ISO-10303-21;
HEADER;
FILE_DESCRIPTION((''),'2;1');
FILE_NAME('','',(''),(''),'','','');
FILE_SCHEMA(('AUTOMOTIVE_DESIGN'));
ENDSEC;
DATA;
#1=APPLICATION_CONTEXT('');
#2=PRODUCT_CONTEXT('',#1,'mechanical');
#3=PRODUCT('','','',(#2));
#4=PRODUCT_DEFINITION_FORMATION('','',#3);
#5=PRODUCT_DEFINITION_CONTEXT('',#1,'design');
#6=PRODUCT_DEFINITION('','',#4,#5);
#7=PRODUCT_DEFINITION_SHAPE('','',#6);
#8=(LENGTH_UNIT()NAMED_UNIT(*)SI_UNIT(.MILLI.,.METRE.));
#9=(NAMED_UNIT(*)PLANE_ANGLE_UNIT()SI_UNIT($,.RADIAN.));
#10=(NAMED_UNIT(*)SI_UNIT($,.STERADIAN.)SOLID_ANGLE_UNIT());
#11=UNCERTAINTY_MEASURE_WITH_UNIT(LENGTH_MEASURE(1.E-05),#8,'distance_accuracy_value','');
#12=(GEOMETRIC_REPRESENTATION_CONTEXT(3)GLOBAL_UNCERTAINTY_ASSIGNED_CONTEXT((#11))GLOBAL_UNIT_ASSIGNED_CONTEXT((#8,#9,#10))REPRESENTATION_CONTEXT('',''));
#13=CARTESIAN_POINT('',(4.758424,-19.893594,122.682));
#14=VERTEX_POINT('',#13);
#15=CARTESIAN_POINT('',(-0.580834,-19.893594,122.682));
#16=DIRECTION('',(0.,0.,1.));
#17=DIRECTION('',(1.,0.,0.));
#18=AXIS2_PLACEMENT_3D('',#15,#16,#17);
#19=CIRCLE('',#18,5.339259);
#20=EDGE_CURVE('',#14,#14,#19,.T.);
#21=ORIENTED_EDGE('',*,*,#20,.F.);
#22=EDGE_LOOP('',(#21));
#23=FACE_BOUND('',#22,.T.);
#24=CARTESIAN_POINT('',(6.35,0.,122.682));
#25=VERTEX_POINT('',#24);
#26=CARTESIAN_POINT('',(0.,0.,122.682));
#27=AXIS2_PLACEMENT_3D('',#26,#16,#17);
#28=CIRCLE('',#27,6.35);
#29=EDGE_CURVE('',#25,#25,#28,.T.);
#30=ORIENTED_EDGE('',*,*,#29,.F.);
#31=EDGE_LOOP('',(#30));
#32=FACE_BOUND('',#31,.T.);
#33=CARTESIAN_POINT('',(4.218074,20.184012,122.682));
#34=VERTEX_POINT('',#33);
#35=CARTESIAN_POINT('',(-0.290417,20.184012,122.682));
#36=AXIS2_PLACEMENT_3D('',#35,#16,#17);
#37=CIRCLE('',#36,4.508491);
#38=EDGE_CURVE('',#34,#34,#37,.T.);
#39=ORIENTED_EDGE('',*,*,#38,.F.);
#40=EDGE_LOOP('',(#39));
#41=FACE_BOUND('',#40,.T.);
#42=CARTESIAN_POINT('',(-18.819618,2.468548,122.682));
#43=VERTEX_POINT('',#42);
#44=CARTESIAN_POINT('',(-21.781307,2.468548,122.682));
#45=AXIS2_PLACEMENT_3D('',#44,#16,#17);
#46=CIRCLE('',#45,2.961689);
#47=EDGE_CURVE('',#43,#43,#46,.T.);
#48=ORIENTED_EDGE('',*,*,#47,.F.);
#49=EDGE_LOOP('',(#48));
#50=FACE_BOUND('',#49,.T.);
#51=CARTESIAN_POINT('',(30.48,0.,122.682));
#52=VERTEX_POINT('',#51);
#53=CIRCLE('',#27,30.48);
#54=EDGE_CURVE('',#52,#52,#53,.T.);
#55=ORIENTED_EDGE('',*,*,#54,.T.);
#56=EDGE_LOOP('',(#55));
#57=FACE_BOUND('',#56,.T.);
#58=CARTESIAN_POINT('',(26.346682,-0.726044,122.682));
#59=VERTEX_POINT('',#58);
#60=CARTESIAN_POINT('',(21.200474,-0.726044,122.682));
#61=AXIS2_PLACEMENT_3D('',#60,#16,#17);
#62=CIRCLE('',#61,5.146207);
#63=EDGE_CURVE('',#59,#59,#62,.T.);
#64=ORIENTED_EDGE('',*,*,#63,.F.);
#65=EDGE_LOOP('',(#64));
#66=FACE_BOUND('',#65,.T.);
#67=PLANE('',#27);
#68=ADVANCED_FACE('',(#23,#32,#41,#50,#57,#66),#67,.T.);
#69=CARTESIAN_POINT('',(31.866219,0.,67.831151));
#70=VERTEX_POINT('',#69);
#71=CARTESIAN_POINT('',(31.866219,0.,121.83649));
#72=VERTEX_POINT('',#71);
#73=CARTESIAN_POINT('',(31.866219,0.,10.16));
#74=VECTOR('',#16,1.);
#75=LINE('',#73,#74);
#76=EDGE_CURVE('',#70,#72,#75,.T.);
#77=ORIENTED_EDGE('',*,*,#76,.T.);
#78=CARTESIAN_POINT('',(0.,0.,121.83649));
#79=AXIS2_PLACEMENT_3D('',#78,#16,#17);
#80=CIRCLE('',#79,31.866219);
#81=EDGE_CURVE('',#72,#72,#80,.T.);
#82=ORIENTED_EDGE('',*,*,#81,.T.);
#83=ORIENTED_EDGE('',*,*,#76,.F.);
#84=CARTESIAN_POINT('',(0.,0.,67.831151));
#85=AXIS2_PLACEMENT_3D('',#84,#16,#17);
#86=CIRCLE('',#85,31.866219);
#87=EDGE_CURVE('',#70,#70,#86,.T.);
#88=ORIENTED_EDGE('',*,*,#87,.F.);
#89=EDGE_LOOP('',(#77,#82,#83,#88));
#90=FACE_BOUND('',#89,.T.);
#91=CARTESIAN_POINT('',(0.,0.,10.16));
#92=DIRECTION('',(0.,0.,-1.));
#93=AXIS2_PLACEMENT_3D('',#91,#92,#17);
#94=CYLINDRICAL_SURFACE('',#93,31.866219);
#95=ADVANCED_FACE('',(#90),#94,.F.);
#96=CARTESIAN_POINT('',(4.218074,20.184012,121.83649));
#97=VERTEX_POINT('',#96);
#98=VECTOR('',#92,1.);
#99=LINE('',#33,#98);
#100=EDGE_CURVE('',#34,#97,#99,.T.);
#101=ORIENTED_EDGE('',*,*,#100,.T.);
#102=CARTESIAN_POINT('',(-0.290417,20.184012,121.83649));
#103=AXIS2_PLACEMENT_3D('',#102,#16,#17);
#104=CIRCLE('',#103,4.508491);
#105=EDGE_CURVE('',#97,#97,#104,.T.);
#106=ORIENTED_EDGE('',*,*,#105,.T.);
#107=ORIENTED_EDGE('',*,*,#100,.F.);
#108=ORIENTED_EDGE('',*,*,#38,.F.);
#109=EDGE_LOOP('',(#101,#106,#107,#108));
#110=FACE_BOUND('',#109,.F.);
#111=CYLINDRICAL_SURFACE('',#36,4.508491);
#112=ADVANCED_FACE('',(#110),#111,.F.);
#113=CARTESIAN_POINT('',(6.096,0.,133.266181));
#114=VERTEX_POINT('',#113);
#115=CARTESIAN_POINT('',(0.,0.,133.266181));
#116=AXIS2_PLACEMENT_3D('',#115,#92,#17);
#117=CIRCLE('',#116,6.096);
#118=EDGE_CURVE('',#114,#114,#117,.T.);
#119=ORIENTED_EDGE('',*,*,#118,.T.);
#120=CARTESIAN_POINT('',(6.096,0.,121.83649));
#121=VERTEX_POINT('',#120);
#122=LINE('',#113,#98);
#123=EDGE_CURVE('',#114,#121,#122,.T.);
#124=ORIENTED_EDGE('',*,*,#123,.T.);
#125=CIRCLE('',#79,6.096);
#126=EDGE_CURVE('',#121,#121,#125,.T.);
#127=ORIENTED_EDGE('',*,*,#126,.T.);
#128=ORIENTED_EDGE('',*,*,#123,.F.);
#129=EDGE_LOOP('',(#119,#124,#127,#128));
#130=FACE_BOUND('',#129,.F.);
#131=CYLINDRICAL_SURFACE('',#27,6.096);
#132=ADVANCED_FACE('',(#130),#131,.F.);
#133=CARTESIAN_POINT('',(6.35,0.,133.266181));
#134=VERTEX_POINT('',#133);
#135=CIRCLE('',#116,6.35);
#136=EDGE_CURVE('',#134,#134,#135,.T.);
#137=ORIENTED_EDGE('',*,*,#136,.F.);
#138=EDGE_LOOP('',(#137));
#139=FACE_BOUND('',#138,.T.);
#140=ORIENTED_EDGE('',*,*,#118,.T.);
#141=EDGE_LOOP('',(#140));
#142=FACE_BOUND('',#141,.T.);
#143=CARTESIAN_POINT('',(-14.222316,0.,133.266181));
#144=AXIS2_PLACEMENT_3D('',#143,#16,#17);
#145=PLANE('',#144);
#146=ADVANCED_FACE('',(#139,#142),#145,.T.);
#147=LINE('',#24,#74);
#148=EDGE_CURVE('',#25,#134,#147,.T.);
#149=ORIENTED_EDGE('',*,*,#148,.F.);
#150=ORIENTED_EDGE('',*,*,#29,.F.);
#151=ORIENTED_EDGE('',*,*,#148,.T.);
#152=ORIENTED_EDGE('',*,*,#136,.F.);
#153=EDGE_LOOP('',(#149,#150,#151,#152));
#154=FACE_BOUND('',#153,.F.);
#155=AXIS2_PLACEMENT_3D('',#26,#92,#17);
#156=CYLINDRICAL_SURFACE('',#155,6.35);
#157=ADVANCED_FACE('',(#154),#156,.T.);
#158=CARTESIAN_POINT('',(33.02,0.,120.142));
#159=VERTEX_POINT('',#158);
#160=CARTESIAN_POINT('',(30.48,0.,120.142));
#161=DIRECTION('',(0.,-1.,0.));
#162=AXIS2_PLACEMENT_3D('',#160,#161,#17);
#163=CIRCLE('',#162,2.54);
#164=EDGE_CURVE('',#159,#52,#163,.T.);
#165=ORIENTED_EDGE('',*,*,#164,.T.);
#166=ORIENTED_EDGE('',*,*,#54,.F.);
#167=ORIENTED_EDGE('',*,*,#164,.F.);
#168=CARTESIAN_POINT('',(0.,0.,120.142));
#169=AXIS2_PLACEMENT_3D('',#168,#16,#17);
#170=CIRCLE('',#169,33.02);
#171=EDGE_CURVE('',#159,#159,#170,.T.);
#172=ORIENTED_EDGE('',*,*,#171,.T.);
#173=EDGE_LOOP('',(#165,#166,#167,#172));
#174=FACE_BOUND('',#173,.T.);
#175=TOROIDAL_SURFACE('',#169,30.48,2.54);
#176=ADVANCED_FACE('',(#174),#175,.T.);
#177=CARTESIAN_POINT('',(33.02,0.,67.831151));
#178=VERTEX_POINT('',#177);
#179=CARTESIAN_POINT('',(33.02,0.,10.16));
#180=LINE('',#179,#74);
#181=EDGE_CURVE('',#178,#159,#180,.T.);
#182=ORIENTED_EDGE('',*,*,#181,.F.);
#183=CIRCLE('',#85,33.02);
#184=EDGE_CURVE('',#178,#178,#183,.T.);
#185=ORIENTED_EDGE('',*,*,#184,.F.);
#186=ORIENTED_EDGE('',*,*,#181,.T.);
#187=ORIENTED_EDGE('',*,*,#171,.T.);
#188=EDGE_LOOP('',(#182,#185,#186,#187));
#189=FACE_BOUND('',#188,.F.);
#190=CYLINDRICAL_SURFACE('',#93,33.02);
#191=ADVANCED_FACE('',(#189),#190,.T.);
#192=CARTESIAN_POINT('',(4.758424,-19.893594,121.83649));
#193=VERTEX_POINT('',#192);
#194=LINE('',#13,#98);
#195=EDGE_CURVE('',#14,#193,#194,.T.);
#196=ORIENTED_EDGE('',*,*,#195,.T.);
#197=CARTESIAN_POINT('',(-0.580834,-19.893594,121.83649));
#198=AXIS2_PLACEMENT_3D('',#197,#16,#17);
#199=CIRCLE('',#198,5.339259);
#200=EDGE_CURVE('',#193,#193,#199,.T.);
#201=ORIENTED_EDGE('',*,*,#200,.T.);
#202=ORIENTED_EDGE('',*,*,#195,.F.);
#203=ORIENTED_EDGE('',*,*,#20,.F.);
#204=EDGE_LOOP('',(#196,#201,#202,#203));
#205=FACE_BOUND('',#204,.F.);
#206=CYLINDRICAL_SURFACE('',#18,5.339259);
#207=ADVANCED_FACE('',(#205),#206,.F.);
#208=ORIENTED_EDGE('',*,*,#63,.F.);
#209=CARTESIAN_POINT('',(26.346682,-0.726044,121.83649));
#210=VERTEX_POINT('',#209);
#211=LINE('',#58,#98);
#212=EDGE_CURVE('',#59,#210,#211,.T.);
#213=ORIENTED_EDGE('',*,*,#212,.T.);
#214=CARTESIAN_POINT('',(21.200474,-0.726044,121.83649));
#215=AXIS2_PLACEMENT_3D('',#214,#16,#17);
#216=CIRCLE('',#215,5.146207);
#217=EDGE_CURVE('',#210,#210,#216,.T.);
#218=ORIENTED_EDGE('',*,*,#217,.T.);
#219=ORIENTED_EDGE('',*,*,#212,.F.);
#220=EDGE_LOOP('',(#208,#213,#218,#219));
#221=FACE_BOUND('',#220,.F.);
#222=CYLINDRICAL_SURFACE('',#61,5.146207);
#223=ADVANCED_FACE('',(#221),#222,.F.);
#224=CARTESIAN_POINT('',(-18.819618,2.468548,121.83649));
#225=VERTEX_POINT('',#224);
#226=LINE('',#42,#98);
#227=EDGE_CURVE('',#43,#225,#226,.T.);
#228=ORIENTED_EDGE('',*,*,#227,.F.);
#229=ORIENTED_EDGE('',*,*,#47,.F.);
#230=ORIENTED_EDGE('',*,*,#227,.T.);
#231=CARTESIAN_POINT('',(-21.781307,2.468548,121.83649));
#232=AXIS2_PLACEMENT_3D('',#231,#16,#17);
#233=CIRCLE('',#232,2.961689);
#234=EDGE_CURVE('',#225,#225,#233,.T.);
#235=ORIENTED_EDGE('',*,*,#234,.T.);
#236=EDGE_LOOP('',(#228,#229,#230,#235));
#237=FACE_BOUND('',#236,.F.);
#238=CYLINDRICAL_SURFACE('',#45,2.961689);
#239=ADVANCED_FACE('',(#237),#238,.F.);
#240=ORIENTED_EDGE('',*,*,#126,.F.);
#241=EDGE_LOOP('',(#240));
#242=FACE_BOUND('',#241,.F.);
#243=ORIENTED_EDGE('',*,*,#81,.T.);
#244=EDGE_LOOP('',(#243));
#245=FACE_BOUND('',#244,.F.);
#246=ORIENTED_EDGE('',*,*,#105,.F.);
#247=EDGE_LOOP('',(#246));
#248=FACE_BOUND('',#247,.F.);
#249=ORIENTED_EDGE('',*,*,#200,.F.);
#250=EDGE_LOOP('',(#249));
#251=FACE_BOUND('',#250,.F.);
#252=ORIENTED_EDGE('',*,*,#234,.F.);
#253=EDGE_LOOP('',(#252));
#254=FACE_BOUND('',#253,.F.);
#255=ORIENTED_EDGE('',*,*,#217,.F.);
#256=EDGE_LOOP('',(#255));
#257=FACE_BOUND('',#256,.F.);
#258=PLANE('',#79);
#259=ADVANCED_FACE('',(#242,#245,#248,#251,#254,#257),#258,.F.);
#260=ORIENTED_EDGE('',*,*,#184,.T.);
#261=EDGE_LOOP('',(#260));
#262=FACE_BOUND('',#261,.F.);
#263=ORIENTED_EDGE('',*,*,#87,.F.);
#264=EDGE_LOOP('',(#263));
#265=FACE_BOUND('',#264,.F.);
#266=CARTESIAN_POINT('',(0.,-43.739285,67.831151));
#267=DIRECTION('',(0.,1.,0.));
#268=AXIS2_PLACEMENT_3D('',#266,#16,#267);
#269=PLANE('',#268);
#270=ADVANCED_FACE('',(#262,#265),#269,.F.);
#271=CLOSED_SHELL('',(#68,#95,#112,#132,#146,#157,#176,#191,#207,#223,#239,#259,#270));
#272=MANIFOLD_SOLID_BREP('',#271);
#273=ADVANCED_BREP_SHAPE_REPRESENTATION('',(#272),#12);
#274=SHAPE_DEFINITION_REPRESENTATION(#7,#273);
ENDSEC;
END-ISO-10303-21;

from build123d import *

# Parameters (mm, degrees)
F0_R           = 27.051
F2_R           = 33.02
F4_DEPTH       = 112.522
F8_DEPTH       = 25.4
F6_R           = 31.8662185307
F10_R          = 27.1012036097
F12_DEPTH      = 111.67649
F13_R          = 6.35
F13_R_2        = 6.096
F14_DEPTH      = 25.4
F15_DEPTH      = 25.4
F16_W          = 95.3798592091
F16_H          = 79.9988703802
F17_DEPTH      = 50.8
F17_DEPTH_BACK = 50.8
F18_R          = 4.5084907347
F18_R_2        = 5.1462074836
F18_R_3        = 5.3392585876
F18_R_4        = 2.9616888365
F19_DEPTH      = 25.4
F20_R          = 2.54
F21_W          = 29.3621988967
F21_H          = 16.516238451
F22_DEPTH      = 25.4
F22_DEPTH_BACK = 25.4


with BuildPart() as f3:
    # F0 (on Top) → F3 section 0
    with BuildSketch(Plane.XY):
        Circle(F0_R)
    # F2 (on offset) → F3 section 1
    with BuildSketch(Plane.XY.offset(10.16)):
        Circle(F2_R)
    loft()

    # F4 (add): a face of the model
    f4_faces = [f3.faces().sort_by_distance(p)[0] for p in [
        (0, 0, 10.16),
    ]]
    extrude(f4_faces, amount=F4_DEPTH)

    # F7 (on face) → F8 (cut)
    with BuildSketch(Plane(origin=(0, 0, 0), x_dir=(1, 0, 0), z_dir=(0, 0, -1))):
        with BuildLine():
            Line((-9.0020672118, 14.5257171748), (8.9738084456, 14.5257171748))
            ThreePointArc((8.9738084456, 14.5257171748), (-0.0141293831, 22.7222466067), (-9.0020672118, 14.5257171748))
        make_face()
    extrude(amount=-F8_DEPTH, mode=Mode.SUBTRACT)

    # F6 (on offset) → F11 section 0
    with BuildSketch(Plane.XY.offset(10.16)):
        Circle(F6_R)
    # F10 (on offset) → F11 section 1
    with BuildSketch(Plane(origin=(0, 0, 1.016), x_dir=(1, 0, 0), z_dir=(0, 0, -1))):
        Circle(F10_R)
    loft(mode=Mode.SUBTRACT)

    # F6 (on offset) → F12 (cut)
    with BuildSketch(Plane.XY.offset(10.16)):
        Circle(F6_R)
    extrude(amount=F12_DEPTH, mode=Mode.SUBTRACT)

    # F13 (on face) → F14 (join)
    with BuildSketch(Plane.XY.offset(122.682)):
        Circle(F13_R)
        Circle(F13_R_2, mode=Mode.SUBTRACT)
    extrude(amount=F14_DEPTH)

    # F15 (cut): a face of the model
    f15_faces = [f3.faces().sort_by_distance(p)[0] for p in [
        (0, 0, 122.682),
    ]]
    extrude(f15_faces, amount=-F15_DEPTH, mode=Mode.SUBTRACT)

    # F16 (on Right) → F17 (cut, two sides)
    with BuildSketch(Plane.YZ) as f17_sk:
        with Locations((3.9506442845, 27.8317159973)):
            Rectangle(F16_W, F16_H)
    extrude(amount=-F17_DEPTH, mode=Mode.SUBTRACT)
    extrude(f17_sk.sketch, amount=F17_DEPTH_BACK, mode=Mode.SUBTRACT)

    # F18 (on face) → F19 (cut)
    with BuildSketch(Plane.XY.offset(122.682)):
        with Locations((-0.2904168505, 20.1840121299)):
            Circle(F18_R)
        with Locations((21.2004743516, -0.7260435959)):
            Circle(F18_R_2)
        with Locations((-0.5808342248, -19.8935940862)):
            Circle(F18_R_3)
        with Locations((-21.7813067138, 2.4685480166)):
            Circle(F18_R_4)
    extrude(amount=-F19_DEPTH, mode=Mode.SUBTRACT)

    # F20
    f20_edges = [f3.edges().sort_by_distance(p)[0] for p in [
        (-33.02, 0, 122.682),
    ]]
    fillet(f20_edges, radius=F20_R)

    # F21 (on Front) → F22 (cut, two sides)
    with BuildSketch(Plane.XZ) as f22_sk:
        with Locations((0.4587839358, 141.5242999792)):
            Rectangle(F21_W, F21_H)
    extrude(amount=-F22_DEPTH, mode=Mode.SUBTRACT)
    extrude(f22_sk.sketch, amount=F22_DEPTH_BACK, mode=Mode.SUBTRACT)


solid = f3.part
